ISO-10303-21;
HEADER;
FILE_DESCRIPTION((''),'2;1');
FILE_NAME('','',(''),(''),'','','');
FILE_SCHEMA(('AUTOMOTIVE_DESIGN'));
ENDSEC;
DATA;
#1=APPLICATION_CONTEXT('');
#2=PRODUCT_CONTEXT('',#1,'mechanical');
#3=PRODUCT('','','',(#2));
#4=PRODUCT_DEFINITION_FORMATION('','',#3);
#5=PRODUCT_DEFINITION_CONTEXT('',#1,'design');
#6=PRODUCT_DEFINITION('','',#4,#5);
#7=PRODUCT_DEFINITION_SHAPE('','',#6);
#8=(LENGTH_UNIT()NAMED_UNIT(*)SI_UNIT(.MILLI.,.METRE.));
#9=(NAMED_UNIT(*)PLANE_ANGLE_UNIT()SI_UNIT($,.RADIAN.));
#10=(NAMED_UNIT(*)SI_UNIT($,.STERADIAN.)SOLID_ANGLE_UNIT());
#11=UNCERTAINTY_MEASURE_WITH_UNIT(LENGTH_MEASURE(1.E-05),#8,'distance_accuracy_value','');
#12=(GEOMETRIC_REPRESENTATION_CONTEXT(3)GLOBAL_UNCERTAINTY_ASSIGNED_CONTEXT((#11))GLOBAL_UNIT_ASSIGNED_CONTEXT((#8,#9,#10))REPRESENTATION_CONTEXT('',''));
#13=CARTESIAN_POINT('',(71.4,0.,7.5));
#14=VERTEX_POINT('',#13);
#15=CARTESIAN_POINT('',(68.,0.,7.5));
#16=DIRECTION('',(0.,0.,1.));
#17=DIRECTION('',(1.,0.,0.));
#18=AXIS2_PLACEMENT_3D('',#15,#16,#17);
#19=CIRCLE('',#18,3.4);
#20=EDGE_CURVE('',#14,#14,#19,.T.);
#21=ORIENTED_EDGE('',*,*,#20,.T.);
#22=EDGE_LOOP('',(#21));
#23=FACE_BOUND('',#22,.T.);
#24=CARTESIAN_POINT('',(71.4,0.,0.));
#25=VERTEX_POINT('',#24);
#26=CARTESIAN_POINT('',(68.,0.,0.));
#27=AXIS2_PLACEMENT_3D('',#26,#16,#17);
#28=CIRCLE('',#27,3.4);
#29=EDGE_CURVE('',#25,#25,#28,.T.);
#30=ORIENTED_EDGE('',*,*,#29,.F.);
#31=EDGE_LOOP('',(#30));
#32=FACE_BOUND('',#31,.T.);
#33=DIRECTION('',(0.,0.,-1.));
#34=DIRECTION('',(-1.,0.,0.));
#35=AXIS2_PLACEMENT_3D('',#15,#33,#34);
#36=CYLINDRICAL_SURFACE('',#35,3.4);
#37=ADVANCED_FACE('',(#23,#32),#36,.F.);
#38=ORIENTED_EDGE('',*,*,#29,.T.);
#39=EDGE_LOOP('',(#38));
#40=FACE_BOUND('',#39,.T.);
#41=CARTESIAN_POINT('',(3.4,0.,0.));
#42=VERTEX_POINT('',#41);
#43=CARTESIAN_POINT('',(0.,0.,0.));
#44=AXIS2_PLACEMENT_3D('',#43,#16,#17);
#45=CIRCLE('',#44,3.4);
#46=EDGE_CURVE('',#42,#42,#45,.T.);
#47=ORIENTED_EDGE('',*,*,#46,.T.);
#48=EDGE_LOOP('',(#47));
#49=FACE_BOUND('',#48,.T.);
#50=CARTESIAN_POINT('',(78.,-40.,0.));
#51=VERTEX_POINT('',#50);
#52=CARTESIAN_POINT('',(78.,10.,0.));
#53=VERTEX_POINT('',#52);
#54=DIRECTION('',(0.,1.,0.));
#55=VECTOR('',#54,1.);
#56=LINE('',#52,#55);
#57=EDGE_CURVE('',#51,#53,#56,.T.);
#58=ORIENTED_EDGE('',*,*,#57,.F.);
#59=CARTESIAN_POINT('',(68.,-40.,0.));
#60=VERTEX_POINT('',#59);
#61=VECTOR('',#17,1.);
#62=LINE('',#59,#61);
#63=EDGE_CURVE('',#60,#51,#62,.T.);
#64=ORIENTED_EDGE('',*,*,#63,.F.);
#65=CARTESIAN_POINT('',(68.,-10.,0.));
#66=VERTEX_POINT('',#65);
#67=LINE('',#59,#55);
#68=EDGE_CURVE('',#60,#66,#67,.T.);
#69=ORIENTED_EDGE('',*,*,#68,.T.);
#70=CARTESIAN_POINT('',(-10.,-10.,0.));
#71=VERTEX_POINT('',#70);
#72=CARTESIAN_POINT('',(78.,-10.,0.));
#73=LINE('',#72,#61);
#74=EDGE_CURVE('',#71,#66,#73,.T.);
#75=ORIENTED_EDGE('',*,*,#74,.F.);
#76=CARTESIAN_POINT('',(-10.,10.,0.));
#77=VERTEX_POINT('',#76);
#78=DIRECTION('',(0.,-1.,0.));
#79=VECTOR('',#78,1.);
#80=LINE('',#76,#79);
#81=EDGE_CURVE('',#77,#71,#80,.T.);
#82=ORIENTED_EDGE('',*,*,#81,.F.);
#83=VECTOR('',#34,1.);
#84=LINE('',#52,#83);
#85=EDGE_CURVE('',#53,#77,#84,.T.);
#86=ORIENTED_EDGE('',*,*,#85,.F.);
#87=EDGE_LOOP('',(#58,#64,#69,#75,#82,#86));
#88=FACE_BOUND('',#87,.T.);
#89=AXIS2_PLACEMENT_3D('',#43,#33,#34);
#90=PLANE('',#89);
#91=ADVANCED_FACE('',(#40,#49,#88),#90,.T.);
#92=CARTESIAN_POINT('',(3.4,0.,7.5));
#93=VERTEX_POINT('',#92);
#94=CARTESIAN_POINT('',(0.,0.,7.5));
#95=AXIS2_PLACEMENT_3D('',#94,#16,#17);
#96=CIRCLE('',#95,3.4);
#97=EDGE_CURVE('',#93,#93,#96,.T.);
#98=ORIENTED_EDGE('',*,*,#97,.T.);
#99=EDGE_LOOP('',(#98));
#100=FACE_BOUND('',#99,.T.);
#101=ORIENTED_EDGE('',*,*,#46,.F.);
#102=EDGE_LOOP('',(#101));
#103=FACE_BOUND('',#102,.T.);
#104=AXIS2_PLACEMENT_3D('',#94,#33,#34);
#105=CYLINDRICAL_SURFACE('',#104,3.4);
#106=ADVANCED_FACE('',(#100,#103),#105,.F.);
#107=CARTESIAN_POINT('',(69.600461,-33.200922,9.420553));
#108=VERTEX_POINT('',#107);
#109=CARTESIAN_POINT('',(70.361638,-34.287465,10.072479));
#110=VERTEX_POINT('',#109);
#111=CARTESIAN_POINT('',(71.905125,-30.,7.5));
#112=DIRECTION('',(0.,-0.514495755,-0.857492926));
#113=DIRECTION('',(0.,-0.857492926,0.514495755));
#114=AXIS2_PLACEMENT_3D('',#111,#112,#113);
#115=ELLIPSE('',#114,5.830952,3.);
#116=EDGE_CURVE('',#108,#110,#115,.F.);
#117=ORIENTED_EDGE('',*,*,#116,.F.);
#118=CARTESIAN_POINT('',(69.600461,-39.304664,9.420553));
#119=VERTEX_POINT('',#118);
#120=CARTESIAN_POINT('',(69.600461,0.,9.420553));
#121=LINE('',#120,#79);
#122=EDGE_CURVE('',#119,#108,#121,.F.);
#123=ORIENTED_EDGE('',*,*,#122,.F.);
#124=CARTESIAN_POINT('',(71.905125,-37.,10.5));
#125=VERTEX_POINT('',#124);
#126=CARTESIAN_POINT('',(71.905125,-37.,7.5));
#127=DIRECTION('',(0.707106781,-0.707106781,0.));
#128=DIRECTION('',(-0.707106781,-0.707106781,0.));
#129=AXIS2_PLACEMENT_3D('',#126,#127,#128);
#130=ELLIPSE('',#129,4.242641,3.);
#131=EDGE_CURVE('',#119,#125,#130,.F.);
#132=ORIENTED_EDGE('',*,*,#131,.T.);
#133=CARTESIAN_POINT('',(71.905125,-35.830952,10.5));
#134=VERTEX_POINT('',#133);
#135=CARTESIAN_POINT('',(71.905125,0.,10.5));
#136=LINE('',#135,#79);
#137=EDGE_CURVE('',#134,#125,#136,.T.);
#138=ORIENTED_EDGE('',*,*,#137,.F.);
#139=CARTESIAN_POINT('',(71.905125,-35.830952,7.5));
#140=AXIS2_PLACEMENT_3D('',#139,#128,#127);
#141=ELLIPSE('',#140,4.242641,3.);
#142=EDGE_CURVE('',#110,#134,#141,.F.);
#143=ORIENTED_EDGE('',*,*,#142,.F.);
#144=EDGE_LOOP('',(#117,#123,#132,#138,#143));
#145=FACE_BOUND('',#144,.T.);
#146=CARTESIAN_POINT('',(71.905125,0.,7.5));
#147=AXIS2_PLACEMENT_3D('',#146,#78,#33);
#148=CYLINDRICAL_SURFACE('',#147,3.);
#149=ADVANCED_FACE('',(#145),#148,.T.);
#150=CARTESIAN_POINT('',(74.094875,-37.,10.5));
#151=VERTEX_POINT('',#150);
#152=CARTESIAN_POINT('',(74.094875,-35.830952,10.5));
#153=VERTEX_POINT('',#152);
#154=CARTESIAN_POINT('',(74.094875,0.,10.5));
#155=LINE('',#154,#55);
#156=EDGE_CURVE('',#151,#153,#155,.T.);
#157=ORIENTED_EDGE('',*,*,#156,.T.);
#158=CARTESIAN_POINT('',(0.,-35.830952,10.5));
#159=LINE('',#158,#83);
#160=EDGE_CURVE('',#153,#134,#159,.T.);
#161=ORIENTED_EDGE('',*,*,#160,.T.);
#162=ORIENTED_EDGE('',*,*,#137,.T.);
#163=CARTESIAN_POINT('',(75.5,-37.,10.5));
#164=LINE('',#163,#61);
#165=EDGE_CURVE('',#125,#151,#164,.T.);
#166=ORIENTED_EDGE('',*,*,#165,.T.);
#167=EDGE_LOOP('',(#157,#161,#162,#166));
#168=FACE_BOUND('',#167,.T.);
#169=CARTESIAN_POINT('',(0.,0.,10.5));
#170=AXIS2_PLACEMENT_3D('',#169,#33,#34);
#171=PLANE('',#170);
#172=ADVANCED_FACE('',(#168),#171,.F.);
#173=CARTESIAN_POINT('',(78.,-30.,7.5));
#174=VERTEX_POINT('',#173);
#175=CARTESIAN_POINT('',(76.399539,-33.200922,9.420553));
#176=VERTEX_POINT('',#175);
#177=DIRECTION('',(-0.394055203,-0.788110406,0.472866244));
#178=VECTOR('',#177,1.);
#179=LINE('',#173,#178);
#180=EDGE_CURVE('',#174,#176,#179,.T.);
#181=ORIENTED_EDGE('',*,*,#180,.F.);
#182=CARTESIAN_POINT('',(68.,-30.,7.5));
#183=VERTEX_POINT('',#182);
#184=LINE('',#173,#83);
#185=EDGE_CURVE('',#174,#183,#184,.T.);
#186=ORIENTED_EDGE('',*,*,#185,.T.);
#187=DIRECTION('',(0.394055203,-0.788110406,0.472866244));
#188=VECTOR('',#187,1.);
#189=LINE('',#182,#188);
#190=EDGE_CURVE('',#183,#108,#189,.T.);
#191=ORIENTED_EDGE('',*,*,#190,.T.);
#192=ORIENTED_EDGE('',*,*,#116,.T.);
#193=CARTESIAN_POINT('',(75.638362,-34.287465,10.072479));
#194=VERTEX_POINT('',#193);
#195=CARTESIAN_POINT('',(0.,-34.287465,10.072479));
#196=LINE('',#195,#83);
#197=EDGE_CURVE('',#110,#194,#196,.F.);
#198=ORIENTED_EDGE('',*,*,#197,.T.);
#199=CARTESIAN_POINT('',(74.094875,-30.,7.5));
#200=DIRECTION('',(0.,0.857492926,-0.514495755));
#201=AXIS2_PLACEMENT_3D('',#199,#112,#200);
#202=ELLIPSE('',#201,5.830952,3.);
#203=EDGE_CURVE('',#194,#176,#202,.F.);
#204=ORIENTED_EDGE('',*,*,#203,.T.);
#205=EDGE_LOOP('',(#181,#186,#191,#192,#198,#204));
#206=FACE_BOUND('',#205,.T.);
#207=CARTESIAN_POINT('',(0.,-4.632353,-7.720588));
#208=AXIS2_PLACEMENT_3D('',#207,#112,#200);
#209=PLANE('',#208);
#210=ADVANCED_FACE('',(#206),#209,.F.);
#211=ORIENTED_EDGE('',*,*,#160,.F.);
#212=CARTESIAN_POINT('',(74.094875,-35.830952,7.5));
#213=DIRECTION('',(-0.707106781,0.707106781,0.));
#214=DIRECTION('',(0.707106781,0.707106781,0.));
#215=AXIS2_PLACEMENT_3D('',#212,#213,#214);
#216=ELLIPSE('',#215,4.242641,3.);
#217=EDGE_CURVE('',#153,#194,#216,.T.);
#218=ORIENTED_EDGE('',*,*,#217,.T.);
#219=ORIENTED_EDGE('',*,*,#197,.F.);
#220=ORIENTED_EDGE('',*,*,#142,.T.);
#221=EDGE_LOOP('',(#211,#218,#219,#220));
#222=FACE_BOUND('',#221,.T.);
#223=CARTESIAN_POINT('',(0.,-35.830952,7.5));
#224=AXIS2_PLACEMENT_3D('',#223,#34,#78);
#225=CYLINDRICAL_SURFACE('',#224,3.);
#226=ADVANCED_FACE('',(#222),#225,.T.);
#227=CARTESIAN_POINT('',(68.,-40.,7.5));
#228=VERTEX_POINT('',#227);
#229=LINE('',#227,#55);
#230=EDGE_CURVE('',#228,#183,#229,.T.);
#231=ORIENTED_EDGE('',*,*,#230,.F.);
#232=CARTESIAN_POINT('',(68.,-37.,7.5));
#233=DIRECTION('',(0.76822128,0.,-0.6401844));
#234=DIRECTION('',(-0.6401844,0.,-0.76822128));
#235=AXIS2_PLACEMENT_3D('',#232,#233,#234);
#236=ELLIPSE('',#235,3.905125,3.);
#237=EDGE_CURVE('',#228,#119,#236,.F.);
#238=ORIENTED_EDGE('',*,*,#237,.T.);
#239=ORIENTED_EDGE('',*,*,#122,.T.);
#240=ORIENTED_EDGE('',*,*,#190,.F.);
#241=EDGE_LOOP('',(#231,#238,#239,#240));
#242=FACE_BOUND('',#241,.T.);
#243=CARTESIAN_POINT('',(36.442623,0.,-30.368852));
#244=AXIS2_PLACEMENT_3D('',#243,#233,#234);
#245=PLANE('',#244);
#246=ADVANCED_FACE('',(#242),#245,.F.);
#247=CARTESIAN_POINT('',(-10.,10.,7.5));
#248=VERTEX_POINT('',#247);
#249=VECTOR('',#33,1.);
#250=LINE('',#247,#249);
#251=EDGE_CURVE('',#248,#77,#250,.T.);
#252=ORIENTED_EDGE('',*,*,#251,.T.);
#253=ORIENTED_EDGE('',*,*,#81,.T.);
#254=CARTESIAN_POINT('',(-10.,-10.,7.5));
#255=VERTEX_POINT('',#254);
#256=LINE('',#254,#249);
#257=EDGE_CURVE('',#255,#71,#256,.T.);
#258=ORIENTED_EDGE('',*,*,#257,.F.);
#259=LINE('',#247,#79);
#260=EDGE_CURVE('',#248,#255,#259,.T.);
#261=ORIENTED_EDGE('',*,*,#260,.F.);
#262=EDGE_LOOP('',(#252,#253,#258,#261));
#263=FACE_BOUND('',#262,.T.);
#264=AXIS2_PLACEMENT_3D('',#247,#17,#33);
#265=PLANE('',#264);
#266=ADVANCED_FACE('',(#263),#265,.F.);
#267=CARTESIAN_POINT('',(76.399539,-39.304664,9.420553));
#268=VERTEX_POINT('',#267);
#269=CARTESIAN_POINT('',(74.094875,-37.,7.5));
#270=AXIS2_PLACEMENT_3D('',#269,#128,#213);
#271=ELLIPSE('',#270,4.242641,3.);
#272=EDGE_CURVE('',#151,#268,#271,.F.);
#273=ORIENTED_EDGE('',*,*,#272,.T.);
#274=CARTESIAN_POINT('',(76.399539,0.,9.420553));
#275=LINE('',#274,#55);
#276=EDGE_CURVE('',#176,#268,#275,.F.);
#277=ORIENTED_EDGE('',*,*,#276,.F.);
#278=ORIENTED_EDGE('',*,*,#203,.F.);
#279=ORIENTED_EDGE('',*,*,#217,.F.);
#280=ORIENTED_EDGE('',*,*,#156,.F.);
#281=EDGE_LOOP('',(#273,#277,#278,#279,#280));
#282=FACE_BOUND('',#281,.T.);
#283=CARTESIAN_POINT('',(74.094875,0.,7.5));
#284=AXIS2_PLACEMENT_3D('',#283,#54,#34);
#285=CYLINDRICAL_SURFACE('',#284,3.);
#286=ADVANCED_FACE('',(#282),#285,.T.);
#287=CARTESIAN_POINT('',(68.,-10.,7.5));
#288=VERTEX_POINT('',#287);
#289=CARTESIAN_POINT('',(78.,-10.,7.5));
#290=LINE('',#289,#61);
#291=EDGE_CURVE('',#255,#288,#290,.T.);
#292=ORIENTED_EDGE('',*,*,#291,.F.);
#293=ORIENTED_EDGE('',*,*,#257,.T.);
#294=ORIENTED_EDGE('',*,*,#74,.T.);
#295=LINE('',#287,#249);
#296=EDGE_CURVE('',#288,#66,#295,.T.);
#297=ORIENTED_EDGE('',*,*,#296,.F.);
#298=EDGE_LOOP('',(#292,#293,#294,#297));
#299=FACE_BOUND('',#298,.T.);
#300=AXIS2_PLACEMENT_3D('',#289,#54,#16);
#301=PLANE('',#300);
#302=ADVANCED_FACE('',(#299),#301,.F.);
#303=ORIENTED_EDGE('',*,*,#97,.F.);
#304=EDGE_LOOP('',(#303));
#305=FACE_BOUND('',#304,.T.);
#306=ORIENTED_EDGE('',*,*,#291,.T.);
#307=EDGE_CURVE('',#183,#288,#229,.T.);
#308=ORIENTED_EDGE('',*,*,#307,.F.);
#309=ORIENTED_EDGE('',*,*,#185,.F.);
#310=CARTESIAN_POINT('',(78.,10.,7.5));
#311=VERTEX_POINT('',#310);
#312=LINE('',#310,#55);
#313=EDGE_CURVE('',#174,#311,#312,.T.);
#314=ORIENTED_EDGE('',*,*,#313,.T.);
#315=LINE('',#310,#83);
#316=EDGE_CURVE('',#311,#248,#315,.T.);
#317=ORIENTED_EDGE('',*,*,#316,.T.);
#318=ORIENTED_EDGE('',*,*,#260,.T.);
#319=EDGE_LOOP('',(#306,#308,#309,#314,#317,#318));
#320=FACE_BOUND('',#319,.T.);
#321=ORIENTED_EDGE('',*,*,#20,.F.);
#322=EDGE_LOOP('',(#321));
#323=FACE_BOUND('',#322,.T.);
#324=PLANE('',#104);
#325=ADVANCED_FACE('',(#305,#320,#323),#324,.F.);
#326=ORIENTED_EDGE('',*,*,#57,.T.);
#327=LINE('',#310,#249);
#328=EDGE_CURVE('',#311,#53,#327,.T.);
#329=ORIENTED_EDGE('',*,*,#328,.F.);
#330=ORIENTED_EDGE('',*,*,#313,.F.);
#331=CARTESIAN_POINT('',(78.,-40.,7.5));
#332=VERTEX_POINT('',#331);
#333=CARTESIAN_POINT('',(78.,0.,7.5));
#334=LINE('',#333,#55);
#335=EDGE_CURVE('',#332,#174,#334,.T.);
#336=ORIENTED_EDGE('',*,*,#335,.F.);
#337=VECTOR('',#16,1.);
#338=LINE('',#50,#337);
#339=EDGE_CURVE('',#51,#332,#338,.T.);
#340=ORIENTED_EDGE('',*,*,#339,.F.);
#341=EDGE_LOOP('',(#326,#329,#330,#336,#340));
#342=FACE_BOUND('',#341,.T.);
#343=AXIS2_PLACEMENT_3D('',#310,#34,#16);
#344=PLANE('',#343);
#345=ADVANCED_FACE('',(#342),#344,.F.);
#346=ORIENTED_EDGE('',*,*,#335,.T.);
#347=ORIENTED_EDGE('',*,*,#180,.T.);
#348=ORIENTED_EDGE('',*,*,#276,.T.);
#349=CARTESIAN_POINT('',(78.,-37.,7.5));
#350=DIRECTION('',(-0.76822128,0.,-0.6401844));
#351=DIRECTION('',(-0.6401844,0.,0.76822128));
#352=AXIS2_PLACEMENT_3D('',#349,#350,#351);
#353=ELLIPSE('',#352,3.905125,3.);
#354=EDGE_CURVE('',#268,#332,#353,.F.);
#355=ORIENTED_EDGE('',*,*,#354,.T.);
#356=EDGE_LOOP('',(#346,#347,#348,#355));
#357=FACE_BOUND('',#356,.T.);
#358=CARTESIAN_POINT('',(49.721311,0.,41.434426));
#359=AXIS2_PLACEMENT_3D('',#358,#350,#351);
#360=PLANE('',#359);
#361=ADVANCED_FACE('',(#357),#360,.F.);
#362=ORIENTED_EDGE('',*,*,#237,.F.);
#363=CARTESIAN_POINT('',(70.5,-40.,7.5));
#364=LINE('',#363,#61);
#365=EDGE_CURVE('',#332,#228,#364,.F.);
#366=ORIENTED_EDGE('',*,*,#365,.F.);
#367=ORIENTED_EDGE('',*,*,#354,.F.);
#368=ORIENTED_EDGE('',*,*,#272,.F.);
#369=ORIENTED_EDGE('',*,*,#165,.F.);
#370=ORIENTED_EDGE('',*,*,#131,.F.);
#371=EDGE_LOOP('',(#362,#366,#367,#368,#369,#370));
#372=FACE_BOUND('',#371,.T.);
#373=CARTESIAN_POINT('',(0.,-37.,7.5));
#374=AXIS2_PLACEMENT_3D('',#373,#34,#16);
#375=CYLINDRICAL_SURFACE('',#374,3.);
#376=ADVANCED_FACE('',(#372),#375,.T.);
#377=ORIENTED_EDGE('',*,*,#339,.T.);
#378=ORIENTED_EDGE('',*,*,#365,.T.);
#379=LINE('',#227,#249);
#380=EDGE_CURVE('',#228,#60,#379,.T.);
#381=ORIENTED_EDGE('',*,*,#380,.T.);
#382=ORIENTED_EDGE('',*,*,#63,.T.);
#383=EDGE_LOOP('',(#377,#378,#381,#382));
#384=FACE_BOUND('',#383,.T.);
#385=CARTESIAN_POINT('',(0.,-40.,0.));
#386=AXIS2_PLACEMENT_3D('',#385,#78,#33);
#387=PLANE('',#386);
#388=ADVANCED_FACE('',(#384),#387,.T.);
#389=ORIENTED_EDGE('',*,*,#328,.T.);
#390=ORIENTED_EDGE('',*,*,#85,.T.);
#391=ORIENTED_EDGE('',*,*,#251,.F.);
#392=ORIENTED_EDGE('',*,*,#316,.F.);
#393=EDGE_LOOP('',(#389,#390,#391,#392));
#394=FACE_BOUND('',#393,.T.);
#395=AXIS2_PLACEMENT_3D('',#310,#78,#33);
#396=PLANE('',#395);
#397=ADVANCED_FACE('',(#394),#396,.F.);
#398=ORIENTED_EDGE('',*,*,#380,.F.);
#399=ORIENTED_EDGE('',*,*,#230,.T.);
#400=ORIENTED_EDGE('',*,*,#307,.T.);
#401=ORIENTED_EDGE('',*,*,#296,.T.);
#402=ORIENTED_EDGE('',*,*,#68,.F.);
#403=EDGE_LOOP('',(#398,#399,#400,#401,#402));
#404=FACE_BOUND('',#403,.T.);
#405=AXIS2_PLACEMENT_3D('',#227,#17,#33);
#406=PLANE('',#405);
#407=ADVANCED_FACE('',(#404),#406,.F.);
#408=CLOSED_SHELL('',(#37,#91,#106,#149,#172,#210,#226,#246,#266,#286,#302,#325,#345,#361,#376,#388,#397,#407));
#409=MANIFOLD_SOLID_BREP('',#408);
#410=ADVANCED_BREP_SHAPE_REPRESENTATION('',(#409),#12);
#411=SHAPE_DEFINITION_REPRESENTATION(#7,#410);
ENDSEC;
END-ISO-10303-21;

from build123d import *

# Parameters (mm, degrees)
SKETCH1_W           = 88
SKETCH1_H           = 20
SKETCH1_R           = 3.4
BOSS_EXTRUDE1_DEPTH = 7.5
SKETCH2_W           = 10
SKETCH2_H           = 7.5
BOSS_EXTRUDE2_DEPTH = 30
FILLET1_R           = 3


with BuildPart() as part:
    # Sketch1 → Boss-Extrude1 (new body)
    with BuildSketch(Plane.XY):
        with Locations((34, 0)):
            Rectangle(SKETCH1_W, SKETCH1_H)
        Circle(SKETCH1_R, mode=Mode.SUBTRACT)
        with Locations((68, 0)):
            Circle(SKETCH1_R, mode=Mode.SUBTRACT)
    extrude(amount=BOSS_EXTRUDE1_DEPTH)

    # Sketch2 → Boss-Extrude2 (add)
    with BuildSketch(Plane.XZ.offset(10)):
        with Locations((73, 3.75)):
            Rectangle(SKETCH2_W, SKETCH2_H)
    extrude(amount=BOSS_EXTRUDE2_DEPTH)

    # Sketch4 → Loft1 section 0
    with BuildSketch(Plane.XY.offset(7.5)):
        with BuildLine():
            Line((78, -40), (68, -40))
            Line((68, -40), (68, -30))
            Line((68, -30), (78, -30))
            Line((78, -30), (78, -40))
        make_face()
    # Sketch3 → Loft1 section 1
    with BuildSketch(Plane.XY.offset(10.5)):
        with BuildLine():
            Line((75.5, -35), (70.5, -35))
            Line((70.5, -35), (70.5, -40))
            Line((70.5, -40), (75.5, -40))
            Line((75.5, -40), (75.5, -35))
        make_face()
    loft()

    # Fillet1
    fillet1_edges = [part.edges().sort_by_distance(p)[0] for p in [
        (73, -35, 10.5),
        (75.5, -37.5, 10.5),
        (73, -40, 10.5),
        (70.5, -37.5, 10.5),
    ]]
    fillet(fillet1_edges, radius=FILLET1_R - 0.0001)  # a hair under: the kernel refuses the full size


solid = part.part
